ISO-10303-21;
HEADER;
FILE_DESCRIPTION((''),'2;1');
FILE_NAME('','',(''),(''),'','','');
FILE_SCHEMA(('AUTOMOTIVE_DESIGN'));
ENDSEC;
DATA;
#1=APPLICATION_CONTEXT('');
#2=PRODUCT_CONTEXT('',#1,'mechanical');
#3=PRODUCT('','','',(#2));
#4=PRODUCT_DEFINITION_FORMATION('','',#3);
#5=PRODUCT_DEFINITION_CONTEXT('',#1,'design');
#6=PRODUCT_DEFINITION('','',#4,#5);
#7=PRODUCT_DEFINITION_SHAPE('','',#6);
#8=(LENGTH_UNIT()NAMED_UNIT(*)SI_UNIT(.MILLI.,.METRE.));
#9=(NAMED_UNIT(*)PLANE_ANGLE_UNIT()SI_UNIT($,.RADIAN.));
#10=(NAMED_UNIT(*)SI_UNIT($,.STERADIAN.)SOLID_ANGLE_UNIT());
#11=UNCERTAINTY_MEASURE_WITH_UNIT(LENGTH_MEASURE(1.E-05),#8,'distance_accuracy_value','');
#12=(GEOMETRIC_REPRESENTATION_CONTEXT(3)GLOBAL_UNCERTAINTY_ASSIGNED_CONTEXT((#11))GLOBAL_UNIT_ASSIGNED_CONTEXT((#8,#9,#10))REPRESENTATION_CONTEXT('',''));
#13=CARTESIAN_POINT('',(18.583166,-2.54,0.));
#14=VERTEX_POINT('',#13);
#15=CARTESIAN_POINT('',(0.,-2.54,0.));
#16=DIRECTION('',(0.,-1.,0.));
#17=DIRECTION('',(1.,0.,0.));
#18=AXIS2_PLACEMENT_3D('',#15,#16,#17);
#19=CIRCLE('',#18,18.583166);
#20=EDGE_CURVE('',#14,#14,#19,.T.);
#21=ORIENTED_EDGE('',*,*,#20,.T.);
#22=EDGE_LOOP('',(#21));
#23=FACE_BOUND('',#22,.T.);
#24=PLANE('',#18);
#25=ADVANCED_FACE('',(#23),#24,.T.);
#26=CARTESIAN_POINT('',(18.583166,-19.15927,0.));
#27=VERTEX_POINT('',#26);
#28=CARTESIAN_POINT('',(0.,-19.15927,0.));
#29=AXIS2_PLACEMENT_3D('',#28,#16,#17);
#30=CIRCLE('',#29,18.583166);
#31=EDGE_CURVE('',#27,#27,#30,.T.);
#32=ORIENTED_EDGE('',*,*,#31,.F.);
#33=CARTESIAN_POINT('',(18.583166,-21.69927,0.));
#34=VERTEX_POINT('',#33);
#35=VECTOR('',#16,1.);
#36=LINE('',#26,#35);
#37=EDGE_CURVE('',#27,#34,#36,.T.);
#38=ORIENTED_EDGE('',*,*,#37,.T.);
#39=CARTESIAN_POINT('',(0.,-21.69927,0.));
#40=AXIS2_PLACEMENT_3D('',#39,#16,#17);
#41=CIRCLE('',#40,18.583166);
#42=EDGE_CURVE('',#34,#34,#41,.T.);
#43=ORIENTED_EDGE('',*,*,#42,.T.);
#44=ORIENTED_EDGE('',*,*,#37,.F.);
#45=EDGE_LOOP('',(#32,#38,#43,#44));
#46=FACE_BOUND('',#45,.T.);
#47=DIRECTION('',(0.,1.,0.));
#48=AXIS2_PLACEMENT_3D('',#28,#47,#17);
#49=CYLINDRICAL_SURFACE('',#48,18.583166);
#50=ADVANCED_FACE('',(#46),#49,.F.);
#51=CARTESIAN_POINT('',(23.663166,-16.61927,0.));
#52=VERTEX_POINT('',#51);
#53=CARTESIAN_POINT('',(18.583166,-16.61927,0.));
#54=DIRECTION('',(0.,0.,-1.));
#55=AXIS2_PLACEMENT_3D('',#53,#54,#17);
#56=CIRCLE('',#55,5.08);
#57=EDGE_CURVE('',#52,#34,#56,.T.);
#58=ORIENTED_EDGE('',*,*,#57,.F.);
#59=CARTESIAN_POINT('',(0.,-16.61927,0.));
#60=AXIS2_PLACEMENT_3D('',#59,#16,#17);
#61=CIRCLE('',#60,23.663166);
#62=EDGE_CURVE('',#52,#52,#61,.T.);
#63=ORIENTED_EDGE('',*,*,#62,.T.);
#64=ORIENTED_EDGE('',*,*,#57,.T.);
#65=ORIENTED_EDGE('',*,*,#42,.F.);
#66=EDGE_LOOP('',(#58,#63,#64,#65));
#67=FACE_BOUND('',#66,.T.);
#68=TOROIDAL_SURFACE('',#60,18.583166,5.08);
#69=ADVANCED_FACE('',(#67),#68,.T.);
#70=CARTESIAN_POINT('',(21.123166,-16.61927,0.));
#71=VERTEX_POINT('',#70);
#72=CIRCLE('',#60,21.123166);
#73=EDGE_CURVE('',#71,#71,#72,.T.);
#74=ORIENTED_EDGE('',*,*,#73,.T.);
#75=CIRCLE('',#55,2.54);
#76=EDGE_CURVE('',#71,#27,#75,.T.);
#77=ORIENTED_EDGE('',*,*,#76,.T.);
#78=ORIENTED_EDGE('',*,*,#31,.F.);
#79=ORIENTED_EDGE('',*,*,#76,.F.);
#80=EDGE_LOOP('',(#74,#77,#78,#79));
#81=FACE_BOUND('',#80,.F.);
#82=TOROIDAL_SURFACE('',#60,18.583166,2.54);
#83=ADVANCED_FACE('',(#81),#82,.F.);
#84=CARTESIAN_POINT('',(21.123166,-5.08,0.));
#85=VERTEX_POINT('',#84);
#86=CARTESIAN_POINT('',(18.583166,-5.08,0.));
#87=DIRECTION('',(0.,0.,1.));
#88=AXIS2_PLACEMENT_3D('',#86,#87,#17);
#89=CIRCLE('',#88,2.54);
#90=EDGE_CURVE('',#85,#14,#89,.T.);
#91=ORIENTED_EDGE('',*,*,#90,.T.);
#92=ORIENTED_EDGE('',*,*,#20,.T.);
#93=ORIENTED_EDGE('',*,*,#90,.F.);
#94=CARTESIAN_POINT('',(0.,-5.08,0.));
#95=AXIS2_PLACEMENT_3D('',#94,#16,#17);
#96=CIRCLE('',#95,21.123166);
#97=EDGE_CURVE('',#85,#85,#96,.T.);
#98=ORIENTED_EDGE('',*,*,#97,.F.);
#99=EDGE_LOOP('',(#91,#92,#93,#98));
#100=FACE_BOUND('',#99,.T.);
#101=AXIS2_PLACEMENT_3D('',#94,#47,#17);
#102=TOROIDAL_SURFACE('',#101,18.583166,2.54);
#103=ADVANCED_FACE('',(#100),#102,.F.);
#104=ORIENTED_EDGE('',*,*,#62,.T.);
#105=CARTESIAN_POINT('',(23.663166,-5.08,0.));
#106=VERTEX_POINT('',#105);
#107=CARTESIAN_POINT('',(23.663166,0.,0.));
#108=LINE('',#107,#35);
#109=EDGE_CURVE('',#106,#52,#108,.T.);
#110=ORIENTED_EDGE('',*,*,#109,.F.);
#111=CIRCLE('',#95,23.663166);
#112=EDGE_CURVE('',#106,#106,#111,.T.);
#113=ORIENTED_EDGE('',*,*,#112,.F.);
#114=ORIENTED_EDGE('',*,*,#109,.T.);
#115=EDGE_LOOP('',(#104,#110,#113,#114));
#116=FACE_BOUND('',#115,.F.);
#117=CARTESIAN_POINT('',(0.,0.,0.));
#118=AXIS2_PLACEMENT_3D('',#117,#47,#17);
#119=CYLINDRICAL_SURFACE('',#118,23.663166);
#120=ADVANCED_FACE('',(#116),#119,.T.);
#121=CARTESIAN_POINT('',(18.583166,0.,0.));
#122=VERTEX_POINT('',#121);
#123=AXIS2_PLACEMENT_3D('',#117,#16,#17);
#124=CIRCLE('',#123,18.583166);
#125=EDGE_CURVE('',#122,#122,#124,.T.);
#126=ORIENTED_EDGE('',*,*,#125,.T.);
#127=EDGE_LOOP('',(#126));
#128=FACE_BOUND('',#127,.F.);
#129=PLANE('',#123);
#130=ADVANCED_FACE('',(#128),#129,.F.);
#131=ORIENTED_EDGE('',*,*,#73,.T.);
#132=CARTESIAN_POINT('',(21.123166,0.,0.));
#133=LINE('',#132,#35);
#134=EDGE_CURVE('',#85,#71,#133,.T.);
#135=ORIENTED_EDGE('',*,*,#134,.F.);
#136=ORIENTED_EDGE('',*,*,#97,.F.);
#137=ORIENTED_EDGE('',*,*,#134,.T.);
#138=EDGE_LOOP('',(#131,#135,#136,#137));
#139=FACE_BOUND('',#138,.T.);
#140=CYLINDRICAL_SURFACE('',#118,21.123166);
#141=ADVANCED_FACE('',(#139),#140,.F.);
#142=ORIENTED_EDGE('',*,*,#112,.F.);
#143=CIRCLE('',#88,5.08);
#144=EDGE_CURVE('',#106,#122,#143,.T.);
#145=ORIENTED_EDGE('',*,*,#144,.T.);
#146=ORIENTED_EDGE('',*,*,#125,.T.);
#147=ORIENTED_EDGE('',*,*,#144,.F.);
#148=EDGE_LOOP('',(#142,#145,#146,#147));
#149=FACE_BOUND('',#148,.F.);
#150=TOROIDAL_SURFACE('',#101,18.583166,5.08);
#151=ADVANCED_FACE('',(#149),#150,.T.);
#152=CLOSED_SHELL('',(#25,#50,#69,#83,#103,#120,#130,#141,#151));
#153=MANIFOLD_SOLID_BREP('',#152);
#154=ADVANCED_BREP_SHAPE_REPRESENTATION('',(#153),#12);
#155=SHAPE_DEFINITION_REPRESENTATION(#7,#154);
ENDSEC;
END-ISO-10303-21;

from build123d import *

# Parameters (mm, degrees)
F0_R     = 23.6631657712
F1_DEPTH = 21.69927
F2_R     = 5.08
F3_T     = -2.54


# Not quite as in the source:
# - a shell that OpenCascade refuses in one call is made with other operations: the cavity is built on its own and cut out


with BuildPart() as f1:
    # F0 (on Front) → F1 (new body)
    with BuildSketch(Plane.XZ):
        Circle(F0_R)
    extrude(amount=F1_DEPTH)

    # F2
    f2_edges = [f1.edges().sort_by_distance(p)[0] for p in [
        (-23.663166, -21.69927, 0),
        (-23.663166, 0, 0),
    ]]
    fillet(f2_edges, radius=F2_R)

    # F3: a shell. OpenCascade refuses it in one call, so the cavity is built on its own and cut out:
    # the body offset inwards by the wall thickness, plus a prism from it out through each open face.
    f3_core = offset(f1.part, amount=F3_T, mode=Mode.PRIVATE)
    f3_exits = [f3_core.faces().sort_by_distance(p)[0] for p in [
        (0, -19.15927, 0),
    ]]
    add(f3_core, mode=Mode.SUBTRACT)
    extrude(f3_exits, amount=-F3_T, mode=Mode.SUBTRACT)


solid = f1.part
